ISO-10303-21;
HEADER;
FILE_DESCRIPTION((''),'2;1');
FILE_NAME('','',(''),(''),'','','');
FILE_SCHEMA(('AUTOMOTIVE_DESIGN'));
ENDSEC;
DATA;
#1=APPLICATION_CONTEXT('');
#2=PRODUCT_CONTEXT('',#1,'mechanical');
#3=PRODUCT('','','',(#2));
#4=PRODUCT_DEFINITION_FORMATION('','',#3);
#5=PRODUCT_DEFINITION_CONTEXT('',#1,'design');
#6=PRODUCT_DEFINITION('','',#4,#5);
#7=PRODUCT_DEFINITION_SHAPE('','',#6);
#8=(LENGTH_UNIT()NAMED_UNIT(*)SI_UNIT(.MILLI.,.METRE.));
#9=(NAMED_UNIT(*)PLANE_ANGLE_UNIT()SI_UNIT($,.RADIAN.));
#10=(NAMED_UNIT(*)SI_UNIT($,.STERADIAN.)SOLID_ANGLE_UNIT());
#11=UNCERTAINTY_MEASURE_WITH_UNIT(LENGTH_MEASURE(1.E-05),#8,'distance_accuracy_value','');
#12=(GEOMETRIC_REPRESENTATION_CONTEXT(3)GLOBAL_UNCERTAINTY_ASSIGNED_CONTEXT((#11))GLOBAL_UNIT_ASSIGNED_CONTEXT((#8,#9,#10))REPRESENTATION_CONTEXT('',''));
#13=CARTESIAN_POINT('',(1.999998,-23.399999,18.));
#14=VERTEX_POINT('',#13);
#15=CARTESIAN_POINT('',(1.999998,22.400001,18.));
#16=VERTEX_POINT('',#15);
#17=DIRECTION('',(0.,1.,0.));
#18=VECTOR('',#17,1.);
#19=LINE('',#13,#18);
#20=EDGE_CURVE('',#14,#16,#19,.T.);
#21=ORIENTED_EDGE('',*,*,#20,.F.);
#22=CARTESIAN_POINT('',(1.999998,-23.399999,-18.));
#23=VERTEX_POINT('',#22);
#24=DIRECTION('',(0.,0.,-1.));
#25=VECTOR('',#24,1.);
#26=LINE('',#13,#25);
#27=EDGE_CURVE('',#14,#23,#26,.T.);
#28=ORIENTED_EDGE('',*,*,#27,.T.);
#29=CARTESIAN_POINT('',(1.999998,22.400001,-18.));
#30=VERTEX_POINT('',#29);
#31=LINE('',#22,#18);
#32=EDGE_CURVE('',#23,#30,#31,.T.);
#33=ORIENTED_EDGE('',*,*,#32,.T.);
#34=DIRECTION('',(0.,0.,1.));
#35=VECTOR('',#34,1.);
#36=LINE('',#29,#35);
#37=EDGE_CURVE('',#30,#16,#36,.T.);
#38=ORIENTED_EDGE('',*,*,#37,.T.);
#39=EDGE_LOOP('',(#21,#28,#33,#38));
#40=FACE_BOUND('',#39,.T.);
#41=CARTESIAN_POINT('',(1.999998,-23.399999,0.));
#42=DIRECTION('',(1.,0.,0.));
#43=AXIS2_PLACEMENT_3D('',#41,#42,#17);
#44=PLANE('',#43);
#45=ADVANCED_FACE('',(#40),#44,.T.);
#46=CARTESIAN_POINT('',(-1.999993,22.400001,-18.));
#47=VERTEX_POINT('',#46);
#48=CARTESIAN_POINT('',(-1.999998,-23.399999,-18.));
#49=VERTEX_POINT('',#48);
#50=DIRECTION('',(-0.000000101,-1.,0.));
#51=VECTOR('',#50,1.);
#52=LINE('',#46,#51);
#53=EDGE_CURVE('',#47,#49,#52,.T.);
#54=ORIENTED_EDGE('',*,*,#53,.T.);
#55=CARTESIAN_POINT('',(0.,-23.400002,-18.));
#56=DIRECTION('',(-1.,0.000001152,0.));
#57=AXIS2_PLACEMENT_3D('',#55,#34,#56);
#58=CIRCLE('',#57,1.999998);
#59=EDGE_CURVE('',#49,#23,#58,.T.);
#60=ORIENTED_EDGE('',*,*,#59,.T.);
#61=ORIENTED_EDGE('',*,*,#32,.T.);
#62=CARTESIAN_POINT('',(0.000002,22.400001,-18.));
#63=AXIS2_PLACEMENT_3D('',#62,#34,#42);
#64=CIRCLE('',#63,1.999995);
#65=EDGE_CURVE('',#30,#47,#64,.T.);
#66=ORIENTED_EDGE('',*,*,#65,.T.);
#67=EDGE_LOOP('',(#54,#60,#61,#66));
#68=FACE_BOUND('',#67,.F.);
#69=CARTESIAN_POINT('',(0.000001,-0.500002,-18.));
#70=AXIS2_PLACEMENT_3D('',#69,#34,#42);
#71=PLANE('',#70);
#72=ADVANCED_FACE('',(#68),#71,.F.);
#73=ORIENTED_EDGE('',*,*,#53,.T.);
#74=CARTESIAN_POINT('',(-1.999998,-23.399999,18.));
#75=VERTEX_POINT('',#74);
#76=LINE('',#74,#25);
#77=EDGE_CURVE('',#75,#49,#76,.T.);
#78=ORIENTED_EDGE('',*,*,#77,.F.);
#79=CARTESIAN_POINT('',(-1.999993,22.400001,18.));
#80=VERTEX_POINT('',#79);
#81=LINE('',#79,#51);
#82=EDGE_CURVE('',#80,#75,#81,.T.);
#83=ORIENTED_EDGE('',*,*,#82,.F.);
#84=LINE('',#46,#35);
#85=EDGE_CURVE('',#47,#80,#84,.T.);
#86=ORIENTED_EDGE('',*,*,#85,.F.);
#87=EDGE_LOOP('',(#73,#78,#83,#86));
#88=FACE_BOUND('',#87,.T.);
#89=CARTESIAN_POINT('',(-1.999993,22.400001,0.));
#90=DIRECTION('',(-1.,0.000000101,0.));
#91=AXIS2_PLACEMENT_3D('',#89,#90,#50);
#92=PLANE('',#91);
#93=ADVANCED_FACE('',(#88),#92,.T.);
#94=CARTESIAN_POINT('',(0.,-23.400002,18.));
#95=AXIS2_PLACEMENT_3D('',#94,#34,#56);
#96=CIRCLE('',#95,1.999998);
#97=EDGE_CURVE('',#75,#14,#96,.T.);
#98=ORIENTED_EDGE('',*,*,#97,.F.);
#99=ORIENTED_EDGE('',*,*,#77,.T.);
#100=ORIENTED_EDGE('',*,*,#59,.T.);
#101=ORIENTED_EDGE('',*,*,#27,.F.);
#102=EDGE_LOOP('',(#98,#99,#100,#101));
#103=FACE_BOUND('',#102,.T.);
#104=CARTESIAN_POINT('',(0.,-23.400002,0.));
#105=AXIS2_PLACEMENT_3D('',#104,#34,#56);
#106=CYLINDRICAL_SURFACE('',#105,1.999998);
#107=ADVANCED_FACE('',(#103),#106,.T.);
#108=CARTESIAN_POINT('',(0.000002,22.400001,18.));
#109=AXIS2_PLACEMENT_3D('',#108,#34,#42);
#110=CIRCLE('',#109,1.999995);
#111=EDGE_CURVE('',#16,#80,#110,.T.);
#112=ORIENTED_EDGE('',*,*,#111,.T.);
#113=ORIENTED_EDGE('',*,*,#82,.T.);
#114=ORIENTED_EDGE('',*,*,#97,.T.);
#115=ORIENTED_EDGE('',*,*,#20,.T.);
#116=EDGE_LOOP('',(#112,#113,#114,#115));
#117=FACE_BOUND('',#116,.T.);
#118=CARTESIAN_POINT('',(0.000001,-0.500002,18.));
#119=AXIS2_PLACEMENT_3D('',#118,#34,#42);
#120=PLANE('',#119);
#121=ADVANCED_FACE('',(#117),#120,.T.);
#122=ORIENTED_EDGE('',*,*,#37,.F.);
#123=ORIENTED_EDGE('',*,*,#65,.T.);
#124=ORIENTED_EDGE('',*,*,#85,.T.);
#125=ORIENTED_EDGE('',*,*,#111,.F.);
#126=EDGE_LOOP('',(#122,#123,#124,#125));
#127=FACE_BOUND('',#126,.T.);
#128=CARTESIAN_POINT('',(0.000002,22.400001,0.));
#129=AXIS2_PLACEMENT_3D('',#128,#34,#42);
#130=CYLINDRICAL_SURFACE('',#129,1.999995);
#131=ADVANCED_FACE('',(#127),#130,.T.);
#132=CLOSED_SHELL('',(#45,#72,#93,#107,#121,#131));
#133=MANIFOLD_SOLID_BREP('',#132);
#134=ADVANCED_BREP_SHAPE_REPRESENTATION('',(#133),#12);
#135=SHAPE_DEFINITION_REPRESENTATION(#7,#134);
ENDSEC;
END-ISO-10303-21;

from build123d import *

# Parameters (mm, degrees)
F1_DEPTH = 18


# Not quite as in the source:
# - ends of sketch curves that miss each other by under 0.0002 mm in the source are joined


with BuildPart() as f1:
    # F0 (on Top) → F1 (new body, symmetric)
    with BuildSketch(Plane.XY):
        with BuildLine():
            Line((1.9999976953, -23.3999992664), (1.9999976953, 22.4000007336))
            ThreePointArc((1.9999976953, 22.4000007336), (2.3047e-06, 24.3999961241), (-1.9999930858, 22.4000007336))
            Line((-1.9999930858, 22.4000007336), (-1.9999976953, -23.3999992664))
            ThreePointArc((-1.9999976953, -23.3999992664), (-2.3047e-06, -25.3999992664), (1.9999976953, -23.3999992664))
        make_face()
    extrude(amount=F1_DEPTH, both=True)


solid = f1.part
